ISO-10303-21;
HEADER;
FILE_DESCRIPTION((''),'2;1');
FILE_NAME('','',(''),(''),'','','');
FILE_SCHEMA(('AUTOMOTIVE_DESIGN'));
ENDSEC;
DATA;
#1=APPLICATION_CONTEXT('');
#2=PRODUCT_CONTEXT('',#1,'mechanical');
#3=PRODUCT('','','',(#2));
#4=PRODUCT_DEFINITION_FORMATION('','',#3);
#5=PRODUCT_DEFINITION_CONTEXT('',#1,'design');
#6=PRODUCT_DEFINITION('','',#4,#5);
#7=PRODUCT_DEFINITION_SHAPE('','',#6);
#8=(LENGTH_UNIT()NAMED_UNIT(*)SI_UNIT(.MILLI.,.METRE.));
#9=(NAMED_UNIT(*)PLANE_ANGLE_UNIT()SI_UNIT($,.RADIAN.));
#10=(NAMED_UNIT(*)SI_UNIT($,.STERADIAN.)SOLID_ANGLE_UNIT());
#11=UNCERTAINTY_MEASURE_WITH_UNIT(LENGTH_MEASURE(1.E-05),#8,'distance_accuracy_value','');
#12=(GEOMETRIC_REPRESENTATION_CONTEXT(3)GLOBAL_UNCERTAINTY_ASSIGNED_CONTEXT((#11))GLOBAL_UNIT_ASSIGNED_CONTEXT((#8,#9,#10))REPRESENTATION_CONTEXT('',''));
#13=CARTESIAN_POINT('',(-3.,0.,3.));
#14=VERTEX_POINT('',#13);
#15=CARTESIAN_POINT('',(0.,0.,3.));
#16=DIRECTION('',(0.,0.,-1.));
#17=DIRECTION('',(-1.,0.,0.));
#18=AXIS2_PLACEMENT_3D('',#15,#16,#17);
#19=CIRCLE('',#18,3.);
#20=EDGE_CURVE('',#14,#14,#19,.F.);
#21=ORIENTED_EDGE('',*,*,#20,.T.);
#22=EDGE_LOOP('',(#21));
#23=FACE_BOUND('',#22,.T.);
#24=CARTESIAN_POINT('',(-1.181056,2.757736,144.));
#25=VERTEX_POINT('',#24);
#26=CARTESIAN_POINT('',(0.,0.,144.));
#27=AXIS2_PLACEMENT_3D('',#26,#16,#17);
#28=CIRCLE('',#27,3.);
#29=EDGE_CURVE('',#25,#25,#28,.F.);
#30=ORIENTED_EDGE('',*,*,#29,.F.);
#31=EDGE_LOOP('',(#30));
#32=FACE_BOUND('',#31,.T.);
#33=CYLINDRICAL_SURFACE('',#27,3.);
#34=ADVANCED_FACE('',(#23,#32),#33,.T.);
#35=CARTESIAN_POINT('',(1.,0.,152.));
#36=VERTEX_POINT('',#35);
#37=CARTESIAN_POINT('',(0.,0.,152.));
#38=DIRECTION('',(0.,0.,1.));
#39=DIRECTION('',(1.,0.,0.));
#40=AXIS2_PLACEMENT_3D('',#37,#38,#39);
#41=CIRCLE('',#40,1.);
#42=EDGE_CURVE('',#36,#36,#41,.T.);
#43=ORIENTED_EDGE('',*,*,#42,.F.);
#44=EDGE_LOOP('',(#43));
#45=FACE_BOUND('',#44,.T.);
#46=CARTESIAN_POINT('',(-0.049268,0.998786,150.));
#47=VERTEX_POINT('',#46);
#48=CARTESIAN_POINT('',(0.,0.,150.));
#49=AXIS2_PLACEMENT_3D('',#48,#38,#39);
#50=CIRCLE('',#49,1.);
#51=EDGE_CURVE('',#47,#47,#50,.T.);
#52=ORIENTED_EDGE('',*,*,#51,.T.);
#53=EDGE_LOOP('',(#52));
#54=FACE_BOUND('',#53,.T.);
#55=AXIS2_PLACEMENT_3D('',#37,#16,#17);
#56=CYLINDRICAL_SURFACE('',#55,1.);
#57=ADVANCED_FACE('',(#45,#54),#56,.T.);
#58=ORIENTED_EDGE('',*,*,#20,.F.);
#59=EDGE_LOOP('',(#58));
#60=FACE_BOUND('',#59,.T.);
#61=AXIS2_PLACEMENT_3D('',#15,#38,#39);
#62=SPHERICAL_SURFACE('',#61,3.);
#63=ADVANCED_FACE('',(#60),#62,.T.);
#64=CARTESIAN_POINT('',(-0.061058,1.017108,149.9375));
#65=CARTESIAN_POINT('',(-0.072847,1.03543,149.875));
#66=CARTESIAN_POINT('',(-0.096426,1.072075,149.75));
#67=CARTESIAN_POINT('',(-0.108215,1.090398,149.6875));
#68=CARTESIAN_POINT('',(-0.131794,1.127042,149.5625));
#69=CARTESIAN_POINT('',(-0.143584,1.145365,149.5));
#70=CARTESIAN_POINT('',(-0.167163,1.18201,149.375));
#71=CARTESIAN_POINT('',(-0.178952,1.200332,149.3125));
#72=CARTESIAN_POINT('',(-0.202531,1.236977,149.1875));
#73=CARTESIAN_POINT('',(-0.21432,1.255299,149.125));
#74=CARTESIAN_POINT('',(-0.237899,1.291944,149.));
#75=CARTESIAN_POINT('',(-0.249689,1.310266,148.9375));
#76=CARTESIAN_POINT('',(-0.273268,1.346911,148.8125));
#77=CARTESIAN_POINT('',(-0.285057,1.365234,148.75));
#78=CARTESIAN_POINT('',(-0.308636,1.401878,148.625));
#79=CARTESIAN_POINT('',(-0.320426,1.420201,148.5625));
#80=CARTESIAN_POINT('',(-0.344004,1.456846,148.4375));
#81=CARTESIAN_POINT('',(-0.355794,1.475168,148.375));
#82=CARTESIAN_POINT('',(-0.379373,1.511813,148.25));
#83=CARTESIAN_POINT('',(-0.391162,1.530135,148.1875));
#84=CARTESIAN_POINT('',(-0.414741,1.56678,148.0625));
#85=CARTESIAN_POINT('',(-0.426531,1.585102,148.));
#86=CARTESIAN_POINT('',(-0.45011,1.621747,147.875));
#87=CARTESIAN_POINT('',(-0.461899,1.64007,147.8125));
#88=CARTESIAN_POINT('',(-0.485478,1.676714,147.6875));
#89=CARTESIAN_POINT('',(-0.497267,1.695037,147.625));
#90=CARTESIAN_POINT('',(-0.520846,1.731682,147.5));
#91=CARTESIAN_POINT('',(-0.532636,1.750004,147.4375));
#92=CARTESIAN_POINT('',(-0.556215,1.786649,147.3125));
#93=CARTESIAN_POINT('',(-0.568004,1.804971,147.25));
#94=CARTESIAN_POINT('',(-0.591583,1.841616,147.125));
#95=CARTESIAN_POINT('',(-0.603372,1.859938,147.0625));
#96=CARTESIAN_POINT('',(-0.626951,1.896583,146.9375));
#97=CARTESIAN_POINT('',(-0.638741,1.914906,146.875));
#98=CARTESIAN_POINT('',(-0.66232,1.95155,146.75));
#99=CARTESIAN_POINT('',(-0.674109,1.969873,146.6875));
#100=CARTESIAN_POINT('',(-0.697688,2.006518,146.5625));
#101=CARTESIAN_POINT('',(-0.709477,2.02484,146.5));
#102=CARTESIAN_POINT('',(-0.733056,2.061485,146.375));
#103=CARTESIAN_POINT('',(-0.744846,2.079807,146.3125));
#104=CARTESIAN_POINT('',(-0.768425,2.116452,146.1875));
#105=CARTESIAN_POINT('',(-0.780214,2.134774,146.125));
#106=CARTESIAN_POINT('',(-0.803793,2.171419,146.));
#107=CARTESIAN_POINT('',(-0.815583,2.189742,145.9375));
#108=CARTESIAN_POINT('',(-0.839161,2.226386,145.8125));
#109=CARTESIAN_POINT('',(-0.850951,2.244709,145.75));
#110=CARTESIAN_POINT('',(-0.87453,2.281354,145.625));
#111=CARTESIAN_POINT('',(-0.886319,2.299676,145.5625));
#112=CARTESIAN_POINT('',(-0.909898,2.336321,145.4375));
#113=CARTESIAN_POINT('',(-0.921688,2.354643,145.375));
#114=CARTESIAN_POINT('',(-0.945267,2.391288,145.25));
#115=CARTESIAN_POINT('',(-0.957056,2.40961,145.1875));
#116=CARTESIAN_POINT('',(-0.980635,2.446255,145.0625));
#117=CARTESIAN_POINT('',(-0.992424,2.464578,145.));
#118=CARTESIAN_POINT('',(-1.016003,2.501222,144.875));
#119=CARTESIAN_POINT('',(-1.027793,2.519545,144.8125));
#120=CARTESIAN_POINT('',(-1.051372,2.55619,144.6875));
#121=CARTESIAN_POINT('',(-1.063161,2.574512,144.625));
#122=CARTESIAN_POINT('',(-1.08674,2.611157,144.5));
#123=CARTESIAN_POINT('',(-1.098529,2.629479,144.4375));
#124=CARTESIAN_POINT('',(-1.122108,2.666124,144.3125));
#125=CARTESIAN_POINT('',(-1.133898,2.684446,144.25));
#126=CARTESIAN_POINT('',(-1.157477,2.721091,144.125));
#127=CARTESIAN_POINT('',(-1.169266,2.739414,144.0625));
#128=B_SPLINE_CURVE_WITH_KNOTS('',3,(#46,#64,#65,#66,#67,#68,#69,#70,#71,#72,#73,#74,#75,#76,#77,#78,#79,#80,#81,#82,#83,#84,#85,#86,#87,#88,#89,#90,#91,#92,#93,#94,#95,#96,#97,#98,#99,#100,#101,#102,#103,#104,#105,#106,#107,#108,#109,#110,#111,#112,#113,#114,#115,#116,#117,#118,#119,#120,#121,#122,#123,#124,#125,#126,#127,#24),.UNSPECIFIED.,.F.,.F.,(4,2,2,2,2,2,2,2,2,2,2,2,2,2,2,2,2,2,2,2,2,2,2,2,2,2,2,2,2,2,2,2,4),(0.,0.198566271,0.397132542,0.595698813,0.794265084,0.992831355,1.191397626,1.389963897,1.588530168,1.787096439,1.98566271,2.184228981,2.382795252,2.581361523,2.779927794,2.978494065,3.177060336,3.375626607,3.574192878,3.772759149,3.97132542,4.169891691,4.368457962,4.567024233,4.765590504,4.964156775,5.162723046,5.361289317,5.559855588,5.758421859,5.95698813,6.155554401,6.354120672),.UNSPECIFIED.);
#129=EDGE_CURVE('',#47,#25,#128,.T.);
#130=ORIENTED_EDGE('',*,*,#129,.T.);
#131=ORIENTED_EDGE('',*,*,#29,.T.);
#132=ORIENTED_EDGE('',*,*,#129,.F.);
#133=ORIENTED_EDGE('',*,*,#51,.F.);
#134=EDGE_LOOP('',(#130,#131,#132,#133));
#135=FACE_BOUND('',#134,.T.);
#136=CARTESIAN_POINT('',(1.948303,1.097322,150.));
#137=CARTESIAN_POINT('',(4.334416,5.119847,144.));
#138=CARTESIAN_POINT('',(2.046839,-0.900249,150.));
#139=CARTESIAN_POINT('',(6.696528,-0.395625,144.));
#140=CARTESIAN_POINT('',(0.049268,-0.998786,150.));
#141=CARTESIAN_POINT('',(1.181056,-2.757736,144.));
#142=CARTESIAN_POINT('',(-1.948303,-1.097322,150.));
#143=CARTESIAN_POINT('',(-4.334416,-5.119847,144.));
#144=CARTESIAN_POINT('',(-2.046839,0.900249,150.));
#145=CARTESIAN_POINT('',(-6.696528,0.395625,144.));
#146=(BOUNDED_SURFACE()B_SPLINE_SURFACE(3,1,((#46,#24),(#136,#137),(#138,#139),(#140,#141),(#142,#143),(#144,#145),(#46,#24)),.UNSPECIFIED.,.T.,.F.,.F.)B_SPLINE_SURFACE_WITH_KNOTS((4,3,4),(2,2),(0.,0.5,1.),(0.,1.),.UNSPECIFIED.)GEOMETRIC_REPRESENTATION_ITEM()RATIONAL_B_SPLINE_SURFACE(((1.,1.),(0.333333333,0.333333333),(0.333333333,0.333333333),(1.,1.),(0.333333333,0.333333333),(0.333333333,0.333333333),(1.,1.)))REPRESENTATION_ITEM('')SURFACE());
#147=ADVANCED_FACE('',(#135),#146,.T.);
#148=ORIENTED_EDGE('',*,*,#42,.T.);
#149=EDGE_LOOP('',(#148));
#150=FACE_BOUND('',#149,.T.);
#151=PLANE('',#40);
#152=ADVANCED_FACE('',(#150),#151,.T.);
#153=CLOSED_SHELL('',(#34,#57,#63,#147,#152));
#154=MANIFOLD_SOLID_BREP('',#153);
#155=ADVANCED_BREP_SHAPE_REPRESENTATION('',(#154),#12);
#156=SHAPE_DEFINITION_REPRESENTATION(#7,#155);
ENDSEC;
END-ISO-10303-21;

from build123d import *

# Parameters (mm, degrees)
CROQUIS3_R              = 3
SALIENTE_EXTRUIR2_DEPTH = 144
REDONDEO2_R             = 3
CROQUIS6_R              = 1
SALIENTE_EXTRUIR3_DEPTH = 2


with BuildPart() as part:
    # Croquis3 → Saliente-Extruir2 (new body)
    with BuildSketch(Plane.XY):
        Circle(CROQUIS3_R)
    extrude(amount=SALIENTE_EXTRUIR2_DEPTH)

    # Redondeo2
    redondeo2_edges = [part.edges().sort_by_distance(p)[0] for p in [
        (-3, 0, 0),
    ]]
    fillet(redondeo2_edges, radius=REDONDEO2_R)

    # Recubrir2: read off the stored shape, not the designer's step
    # Recubrir2: loft between two sections, ruled curve by curve
    recubrir2_from = [
        Edge.make_bspline([(-0.049268062, 0.998785592, 150), (1.948303122, 1.097321715, 150), (2.046839245, -0.900249468, 150), (0.049268062, -0.998785592, 150), (-1.948303122, -1.097321715, 150), (-2.046839245, 0.900249468, 150), (-0.049268062, 0.998785592, 150)], [0, 0, 0, 0, 0.5, 0.5, 0.5, 1, 1, 1, 1], 3, [1, 0.333333333, 0.333333333, 1, 0.333333333, 0.333333333, 1]),
    ]
    recubrir2_to = [
        Edge.make_bspline([(-1.18105567, 2.757735938, 144), (4.334416207, 5.119847278, 144), (6.696527546, -0.395624599, 144), (1.18105567, -2.757735938, 144), (-4.334416207, -5.119847278, 144), (-6.696527546, 0.395624599, 144), (-1.18105567, 2.757735938, 144)], [0, 0, 0, 0, 0.5, 0.5, 0.5, 1, 1, 1, 1], 3, [1, 0.333333333, 0.333333333, 1, 0.333333333, 0.333333333, 1]),
    ]
    recubrir2 = Solid(Shell([*[Face.make_surface_from_curves(recubrir2_from[k], recubrir2_to[k]) for k in range(1)], Face(Wire(recubrir2_from)), Face(Wire(recubrir2_to))]))
    add(recubrir2)

    # Croquis6 → Saliente-Extruir3 (add)
    with BuildSketch(Plane.XY.offset(150)):
        with Locations(Location((0, 0, 0), (0, 0, 92.823995247))):
            Circle(CROQUIS6_R)
    extrude(amount=SALIENTE_EXTRUIR3_DEPTH)


solid = part.part
